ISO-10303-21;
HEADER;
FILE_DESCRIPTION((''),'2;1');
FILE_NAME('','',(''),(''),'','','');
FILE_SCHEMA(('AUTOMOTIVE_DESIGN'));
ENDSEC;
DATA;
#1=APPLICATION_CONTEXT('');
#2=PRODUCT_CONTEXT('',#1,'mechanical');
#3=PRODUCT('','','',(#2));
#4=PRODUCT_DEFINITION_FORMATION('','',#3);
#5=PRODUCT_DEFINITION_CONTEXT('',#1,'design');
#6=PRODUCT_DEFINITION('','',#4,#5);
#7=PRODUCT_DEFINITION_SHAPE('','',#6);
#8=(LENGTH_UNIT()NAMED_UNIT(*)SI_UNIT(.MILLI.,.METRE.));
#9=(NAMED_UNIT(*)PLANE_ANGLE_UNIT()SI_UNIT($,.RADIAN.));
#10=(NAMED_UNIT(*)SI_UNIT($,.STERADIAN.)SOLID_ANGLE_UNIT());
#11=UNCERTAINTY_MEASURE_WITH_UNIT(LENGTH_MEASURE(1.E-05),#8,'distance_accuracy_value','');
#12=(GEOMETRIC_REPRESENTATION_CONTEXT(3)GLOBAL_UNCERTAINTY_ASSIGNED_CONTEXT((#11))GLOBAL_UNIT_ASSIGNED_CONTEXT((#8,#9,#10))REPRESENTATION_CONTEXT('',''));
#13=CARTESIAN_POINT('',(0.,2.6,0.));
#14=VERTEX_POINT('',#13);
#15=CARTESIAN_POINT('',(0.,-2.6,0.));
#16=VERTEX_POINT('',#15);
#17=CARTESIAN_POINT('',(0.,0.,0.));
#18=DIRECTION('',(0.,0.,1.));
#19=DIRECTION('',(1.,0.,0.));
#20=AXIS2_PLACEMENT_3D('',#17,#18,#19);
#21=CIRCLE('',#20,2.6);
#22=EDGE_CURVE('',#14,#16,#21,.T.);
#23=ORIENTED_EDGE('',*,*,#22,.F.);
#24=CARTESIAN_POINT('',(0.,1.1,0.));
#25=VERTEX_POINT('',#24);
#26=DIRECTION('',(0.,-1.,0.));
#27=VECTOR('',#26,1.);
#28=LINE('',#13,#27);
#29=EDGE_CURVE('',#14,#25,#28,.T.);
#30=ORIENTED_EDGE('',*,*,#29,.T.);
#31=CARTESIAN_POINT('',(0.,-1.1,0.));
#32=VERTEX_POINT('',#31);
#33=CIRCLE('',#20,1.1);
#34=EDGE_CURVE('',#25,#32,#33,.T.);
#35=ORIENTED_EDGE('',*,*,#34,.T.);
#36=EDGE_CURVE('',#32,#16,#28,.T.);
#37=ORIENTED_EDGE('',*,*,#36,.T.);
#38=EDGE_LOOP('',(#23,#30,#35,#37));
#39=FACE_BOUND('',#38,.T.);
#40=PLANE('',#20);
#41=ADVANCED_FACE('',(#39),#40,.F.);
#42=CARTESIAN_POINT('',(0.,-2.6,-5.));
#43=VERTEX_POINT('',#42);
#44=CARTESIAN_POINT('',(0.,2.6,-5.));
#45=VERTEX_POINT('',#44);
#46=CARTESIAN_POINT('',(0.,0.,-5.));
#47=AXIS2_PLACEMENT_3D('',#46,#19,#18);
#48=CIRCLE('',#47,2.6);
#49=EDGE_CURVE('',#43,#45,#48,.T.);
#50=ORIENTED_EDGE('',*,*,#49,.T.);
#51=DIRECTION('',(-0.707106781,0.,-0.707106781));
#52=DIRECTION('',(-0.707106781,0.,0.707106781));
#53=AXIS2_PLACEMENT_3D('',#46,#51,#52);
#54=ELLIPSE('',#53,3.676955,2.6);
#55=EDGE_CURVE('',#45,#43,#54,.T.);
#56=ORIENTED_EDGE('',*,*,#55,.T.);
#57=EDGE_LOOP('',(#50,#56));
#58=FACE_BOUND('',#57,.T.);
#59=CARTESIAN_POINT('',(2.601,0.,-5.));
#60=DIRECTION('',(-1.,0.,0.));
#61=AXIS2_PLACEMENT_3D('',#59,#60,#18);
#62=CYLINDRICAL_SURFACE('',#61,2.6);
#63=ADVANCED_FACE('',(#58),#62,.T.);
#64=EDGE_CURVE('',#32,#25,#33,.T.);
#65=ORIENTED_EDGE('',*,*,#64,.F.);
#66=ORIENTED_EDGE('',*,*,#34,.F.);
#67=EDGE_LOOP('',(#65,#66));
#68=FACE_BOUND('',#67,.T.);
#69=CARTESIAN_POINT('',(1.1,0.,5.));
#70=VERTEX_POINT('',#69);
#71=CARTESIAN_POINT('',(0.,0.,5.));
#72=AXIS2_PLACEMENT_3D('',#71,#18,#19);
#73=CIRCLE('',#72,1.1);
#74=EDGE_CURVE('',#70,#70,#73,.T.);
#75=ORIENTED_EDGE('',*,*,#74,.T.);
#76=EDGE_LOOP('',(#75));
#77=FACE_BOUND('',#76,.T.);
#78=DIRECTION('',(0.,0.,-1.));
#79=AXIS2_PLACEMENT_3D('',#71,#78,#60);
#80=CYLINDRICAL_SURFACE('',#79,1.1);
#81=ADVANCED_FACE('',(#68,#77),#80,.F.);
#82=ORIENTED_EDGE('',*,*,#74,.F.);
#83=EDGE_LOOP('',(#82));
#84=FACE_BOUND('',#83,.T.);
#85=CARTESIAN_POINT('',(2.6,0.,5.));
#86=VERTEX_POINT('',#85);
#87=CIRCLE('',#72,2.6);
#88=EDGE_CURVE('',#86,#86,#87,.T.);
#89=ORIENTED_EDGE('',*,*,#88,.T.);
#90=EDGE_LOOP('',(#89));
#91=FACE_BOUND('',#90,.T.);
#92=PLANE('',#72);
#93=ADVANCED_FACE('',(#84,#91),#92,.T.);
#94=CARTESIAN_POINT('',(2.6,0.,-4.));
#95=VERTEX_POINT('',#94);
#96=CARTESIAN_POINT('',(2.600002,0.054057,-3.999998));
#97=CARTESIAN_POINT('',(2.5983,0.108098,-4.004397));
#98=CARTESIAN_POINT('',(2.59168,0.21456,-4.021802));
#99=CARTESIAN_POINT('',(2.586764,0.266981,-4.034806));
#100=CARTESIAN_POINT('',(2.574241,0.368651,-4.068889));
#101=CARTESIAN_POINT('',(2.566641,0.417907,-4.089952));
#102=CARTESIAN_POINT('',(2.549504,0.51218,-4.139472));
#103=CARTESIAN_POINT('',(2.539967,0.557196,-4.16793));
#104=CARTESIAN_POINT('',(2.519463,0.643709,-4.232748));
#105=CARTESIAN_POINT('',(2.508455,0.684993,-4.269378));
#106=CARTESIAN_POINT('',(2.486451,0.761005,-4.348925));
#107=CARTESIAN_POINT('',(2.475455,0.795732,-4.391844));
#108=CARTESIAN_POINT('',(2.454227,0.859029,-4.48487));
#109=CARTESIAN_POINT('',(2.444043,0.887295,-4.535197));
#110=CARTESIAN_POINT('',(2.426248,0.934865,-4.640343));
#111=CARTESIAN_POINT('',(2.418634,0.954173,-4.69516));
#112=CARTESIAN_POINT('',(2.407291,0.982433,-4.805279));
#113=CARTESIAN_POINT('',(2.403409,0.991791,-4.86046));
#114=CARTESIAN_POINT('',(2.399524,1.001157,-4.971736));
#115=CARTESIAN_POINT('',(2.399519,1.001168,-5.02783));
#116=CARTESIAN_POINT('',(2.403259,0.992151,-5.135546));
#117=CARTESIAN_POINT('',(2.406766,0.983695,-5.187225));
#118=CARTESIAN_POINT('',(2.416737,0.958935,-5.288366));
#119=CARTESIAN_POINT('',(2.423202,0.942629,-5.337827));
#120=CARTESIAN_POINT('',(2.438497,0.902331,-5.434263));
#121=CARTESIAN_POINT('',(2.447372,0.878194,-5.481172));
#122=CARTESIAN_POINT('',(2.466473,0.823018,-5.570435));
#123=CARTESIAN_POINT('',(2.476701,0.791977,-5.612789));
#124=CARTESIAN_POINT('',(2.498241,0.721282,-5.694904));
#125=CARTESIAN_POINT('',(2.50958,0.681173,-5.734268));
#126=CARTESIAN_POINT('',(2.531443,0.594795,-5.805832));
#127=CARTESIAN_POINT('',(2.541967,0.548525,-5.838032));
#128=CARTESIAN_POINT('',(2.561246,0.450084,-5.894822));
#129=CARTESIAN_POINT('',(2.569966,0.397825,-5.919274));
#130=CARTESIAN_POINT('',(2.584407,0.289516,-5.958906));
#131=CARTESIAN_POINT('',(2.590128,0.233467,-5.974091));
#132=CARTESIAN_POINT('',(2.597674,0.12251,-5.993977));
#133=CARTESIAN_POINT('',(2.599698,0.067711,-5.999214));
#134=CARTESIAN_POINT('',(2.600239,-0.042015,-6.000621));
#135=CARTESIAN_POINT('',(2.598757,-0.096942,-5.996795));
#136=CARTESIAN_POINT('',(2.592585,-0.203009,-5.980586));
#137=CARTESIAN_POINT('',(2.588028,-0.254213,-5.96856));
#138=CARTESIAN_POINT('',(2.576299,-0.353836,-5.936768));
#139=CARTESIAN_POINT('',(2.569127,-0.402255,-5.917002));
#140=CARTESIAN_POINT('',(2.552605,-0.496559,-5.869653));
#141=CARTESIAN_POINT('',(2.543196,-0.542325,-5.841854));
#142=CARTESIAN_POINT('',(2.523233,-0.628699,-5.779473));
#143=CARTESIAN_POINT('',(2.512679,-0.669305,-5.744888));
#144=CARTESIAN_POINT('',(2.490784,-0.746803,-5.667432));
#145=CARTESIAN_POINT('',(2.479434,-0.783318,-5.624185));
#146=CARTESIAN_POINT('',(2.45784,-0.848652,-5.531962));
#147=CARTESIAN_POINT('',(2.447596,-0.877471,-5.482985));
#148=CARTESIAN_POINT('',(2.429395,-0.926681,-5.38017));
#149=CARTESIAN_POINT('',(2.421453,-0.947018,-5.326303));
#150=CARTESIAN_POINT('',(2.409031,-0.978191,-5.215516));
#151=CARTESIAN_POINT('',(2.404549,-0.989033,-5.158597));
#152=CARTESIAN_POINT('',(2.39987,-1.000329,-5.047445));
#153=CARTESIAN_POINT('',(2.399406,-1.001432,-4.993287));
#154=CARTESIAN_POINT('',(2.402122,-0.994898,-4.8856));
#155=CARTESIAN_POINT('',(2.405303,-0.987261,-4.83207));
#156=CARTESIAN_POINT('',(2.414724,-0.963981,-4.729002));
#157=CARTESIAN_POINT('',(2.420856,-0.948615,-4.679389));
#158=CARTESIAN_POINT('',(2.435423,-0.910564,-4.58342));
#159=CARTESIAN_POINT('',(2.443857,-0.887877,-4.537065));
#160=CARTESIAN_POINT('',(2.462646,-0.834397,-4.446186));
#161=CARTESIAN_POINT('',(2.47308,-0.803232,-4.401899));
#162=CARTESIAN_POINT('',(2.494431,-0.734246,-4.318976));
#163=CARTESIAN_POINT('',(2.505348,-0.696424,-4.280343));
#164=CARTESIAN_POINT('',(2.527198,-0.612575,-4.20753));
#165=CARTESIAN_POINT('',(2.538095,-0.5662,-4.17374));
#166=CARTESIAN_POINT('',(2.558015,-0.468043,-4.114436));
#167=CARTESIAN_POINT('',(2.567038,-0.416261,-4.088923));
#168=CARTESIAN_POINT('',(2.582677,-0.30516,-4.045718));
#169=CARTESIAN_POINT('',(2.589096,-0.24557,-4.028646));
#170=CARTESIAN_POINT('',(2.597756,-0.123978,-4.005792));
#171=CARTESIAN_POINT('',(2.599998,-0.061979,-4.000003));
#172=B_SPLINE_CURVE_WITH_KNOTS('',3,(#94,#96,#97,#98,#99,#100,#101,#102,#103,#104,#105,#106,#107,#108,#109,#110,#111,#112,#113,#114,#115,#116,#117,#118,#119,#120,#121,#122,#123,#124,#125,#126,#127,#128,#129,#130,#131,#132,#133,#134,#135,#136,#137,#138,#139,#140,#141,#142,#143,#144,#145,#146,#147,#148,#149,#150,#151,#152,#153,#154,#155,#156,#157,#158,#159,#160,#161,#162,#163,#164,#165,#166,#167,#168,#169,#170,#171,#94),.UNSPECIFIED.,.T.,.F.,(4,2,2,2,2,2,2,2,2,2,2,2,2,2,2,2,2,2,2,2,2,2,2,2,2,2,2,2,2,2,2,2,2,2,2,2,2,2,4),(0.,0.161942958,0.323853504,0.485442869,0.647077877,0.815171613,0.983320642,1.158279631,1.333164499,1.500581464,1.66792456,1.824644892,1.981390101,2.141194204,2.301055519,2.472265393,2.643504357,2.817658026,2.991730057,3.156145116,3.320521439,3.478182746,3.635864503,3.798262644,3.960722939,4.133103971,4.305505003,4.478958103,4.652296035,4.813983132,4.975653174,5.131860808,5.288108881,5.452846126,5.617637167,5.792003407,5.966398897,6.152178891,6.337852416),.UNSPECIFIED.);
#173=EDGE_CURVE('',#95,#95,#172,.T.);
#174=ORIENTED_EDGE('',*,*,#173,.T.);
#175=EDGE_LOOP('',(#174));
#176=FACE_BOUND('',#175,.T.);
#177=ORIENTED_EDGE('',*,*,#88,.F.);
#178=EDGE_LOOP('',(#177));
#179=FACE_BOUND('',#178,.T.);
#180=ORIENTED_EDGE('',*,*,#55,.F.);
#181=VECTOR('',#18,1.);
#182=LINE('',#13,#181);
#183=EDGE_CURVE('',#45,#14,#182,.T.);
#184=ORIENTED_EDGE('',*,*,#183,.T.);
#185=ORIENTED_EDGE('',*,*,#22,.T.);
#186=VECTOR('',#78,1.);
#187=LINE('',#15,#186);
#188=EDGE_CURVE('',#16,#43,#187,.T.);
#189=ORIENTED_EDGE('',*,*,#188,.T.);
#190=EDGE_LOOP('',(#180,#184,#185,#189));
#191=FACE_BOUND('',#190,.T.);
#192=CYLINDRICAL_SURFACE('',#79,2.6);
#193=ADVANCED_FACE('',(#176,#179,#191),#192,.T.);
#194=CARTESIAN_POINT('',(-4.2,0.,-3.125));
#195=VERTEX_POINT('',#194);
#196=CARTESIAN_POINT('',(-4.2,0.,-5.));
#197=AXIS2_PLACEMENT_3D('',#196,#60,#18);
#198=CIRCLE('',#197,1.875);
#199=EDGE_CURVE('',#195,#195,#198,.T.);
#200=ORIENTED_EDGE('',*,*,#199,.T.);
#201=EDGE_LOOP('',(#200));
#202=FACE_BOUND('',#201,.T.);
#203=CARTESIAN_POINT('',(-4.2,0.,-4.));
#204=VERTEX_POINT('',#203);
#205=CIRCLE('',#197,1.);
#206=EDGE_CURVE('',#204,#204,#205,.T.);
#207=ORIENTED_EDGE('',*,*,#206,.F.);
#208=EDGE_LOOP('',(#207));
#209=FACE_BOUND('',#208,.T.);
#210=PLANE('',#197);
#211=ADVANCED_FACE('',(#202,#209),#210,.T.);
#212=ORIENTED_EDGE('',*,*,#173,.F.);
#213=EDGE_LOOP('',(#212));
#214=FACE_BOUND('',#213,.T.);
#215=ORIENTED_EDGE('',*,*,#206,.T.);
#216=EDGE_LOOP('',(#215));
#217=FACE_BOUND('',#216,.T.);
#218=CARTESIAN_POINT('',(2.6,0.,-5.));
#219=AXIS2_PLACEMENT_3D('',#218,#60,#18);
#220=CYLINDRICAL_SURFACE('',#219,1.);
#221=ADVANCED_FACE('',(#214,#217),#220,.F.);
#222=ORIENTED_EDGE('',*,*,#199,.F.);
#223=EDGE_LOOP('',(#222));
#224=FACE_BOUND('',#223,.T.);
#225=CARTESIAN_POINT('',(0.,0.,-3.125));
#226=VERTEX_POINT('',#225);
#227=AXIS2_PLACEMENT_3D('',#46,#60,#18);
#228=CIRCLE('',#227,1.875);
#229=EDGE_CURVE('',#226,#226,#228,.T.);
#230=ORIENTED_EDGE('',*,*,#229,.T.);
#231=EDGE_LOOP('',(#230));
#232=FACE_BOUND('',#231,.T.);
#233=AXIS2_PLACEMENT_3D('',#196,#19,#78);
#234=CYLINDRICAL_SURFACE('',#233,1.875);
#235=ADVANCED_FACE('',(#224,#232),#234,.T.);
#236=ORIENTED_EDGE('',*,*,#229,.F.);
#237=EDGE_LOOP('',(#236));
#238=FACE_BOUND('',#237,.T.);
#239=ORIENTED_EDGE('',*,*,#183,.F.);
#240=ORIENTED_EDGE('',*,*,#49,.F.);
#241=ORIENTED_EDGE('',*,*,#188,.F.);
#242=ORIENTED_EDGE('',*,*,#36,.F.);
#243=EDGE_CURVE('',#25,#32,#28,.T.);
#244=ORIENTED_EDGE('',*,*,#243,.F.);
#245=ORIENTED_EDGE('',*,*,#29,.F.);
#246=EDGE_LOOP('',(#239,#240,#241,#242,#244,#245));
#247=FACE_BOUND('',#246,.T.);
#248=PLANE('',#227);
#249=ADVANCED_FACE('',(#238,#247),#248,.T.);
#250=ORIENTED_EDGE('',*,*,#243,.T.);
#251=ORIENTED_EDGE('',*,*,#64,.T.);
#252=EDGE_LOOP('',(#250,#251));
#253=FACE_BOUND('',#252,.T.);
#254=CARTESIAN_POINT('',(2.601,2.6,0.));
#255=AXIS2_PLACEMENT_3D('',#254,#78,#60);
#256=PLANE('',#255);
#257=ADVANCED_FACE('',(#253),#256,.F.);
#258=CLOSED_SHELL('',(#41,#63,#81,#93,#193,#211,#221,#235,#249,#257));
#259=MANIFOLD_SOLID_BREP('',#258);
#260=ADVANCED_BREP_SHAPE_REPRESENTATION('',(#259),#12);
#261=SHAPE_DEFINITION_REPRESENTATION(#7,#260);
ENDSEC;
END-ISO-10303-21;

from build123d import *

# Parameters (mm, degrees)
SKETCH8_R                = 2.6
SKETCH8_R_2              = 1.1
BOSS_EXTRUDE2_DEPTH      = 5
BOSS_EXTRUDE3_REACH      = 8.206
BOSS_EXTRUDE3_END_RADIUS = 2.6
SKETCH10_R               = 1.875
BOSS_EXTRUDE4_DEPTH      = 4.2
SKETCH11_R               = 1
CUT_EXTRUDE1_DEPTH       = 11.524257694


with BuildPart() as part:
    # Sketch8 → Boss-Extrude2 (new body)
    with BuildSketch(Plane.XY):
        Circle(SKETCH8_R)
        Circle(SKETCH8_R_2, mode=Mode.SUBTRACT)
    extrude(amount=BOSS_EXTRUDE2_DEPTH)

    # Boss-Extrude3: up to this cylinder (the profile starts inside it)
    boss_extrude3_end = Plane(origin=(0, 0, -3.544928), z_dir=(0, 0, -1)) * Cylinder(BOSS_EXTRUDE3_END_RADIUS, 22.612, mode=Mode.PRIVATE)
    # Sketch9 → Boss-Extrude3 (add, up to the surface)
    with BuildSketch(Plane(origin=(0, 0, 0), x_dir=(0, 0, -1), z_dir=(1, 0, 0)), mode=Mode.PRIVATE) as boss_extrude3_sk1:
        with BuildLine():
            Line((0, 2.6), (5, 2.6))
            ThreePointArc((5, 2.6), (7.6, 0), (5, -2.6))
            Line((5, -2.6), (0, -2.6))
            Line((0, -2.6), (0, 2.6))
        make_face()
    boss_extrude3_tool1 = extrude(boss_extrude3_sk1.sketch, amount=BOSS_EXTRUDE3_REACH, mode=Mode.PRIVATE) & boss_extrude3_end
    add(boss_extrude3_tool1.solids().sort_by_distance((0, 0, -3.544928))[0])

    # Sketch10 → Boss-Extrude4 (add)
    with BuildSketch(Plane.ZY):
        with Locations((-5, 0)):
            Circle(SKETCH10_R)
    extrude(amount=BOSS_EXTRUDE4_DEPTH)

    # Sketch11 → Cut-Extrude1 (cut, through all)
    with BuildSketch(Plane.ZY.offset(4.2)):
        with Locations((-5, 0)):
            Circle(SKETCH11_R)
    extrude(amount=-CUT_EXTRUDE1_DEPTH, mode=Mode.SUBTRACT)


solid = part.part
